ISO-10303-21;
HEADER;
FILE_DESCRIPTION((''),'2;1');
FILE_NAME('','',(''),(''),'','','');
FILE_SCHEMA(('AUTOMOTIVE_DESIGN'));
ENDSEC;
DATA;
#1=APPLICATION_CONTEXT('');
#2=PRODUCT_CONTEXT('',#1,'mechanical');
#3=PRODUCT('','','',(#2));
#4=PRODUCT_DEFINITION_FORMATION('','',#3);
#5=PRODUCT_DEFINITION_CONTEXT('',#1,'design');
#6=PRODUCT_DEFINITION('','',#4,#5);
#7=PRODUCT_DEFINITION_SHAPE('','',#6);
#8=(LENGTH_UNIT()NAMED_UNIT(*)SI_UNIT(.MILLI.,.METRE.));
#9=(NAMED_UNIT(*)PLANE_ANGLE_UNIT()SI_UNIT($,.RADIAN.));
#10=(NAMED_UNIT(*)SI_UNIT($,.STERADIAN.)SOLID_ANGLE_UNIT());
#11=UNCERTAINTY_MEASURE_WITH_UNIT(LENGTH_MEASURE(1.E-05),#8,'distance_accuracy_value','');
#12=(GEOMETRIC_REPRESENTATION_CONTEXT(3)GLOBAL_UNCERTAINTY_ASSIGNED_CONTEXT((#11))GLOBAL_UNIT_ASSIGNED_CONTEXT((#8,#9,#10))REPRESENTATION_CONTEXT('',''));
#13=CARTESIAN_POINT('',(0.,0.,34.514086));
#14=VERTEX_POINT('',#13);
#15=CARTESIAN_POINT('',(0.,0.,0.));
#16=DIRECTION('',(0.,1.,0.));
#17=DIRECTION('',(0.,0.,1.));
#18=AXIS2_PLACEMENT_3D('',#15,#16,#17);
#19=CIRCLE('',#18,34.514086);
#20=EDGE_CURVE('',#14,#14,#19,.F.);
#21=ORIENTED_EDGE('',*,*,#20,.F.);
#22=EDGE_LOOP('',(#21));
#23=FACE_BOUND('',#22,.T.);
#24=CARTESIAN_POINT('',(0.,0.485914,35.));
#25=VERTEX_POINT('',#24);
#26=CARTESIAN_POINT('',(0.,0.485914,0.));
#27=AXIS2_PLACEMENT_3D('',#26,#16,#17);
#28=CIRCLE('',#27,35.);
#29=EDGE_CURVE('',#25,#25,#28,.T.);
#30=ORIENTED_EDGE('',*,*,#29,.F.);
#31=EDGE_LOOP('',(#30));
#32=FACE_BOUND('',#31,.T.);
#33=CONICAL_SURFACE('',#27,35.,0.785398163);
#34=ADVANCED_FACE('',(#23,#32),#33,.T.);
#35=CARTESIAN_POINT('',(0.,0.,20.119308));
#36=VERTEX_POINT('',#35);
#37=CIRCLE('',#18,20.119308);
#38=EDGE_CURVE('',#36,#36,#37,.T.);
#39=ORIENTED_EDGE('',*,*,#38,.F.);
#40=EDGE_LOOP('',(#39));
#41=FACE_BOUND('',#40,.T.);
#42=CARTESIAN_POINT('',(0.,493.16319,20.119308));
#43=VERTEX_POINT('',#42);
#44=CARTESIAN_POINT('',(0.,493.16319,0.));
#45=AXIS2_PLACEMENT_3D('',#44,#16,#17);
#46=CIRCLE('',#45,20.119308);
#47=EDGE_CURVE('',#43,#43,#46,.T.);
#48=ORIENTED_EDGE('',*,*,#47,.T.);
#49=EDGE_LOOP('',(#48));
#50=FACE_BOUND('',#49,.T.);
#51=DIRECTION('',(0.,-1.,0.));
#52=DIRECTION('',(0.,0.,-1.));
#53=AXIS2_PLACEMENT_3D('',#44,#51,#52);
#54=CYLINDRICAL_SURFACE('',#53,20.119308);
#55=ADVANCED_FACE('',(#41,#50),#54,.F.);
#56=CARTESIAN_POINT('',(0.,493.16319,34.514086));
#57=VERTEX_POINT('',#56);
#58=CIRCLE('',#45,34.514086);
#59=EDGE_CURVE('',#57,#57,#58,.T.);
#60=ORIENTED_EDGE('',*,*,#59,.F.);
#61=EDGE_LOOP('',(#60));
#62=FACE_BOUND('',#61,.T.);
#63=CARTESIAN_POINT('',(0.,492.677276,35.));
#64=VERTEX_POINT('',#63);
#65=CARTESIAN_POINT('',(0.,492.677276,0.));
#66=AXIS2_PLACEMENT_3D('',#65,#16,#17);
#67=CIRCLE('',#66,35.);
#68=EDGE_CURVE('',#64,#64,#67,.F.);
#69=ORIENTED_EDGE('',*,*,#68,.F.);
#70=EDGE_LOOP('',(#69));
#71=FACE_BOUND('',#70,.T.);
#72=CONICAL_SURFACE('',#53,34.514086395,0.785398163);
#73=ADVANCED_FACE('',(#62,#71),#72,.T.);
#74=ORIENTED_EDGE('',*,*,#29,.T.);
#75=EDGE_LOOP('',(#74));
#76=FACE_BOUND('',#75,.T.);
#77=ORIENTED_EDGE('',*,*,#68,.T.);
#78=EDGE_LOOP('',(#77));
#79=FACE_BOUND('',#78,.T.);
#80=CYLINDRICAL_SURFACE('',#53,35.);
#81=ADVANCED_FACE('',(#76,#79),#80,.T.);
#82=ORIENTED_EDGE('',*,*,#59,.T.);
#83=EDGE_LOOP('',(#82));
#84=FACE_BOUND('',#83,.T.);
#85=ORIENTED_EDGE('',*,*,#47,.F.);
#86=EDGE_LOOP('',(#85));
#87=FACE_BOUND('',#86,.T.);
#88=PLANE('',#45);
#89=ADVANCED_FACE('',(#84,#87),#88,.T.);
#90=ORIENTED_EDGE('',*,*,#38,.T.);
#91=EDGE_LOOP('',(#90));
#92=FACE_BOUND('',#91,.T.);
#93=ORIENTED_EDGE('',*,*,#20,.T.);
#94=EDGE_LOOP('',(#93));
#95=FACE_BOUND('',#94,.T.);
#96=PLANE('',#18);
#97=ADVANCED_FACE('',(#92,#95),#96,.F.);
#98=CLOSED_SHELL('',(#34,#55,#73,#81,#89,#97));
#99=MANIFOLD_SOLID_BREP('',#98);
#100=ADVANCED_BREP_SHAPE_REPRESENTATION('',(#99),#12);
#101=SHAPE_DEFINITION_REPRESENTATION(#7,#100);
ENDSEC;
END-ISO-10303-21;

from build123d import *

# Parameters (mm, degrees)
SKETCH1_R           = 35
BOSS_EXTRUDE1_DEPTH = 493.163189732
SKETCH2_R           = 20.119308325
CUT_EXTRUDE1_DEPTH  = 496.640930217
CHAMFER1_SIZE       = 0.485913605


with BuildPart() as part:
    # Sketch1 → Boss-Extrude1 (new body)
    with BuildSketch(Plane(origin=(0, 0, 0), x_dir=(1, 0, 0), z_dir=(0, 1, 0))):
        Circle(SKETCH1_R)
    extrude(amount=BOSS_EXTRUDE1_DEPTH)

    # Sketch2 → Cut-Extrude1 (cut, through all)
    with BuildSketch(Plane(origin=(0, 0, 0), x_dir=(1, 0, 0), z_dir=(0, 1, 0))):
        Circle(SKETCH2_R)
    extrude(amount=CUT_EXTRUDE1_DEPTH, mode=Mode.SUBTRACT)

    # Chamfer1
    chamfer1_edges = [part.edges().sort_by_distance(p)[0] for p in [
        (-35, 493.163189732, 0),
        (-35, 0, 0),
    ]]
    chamfer(chamfer1_edges, length=CHAMFER1_SIZE)


solid = part.part
